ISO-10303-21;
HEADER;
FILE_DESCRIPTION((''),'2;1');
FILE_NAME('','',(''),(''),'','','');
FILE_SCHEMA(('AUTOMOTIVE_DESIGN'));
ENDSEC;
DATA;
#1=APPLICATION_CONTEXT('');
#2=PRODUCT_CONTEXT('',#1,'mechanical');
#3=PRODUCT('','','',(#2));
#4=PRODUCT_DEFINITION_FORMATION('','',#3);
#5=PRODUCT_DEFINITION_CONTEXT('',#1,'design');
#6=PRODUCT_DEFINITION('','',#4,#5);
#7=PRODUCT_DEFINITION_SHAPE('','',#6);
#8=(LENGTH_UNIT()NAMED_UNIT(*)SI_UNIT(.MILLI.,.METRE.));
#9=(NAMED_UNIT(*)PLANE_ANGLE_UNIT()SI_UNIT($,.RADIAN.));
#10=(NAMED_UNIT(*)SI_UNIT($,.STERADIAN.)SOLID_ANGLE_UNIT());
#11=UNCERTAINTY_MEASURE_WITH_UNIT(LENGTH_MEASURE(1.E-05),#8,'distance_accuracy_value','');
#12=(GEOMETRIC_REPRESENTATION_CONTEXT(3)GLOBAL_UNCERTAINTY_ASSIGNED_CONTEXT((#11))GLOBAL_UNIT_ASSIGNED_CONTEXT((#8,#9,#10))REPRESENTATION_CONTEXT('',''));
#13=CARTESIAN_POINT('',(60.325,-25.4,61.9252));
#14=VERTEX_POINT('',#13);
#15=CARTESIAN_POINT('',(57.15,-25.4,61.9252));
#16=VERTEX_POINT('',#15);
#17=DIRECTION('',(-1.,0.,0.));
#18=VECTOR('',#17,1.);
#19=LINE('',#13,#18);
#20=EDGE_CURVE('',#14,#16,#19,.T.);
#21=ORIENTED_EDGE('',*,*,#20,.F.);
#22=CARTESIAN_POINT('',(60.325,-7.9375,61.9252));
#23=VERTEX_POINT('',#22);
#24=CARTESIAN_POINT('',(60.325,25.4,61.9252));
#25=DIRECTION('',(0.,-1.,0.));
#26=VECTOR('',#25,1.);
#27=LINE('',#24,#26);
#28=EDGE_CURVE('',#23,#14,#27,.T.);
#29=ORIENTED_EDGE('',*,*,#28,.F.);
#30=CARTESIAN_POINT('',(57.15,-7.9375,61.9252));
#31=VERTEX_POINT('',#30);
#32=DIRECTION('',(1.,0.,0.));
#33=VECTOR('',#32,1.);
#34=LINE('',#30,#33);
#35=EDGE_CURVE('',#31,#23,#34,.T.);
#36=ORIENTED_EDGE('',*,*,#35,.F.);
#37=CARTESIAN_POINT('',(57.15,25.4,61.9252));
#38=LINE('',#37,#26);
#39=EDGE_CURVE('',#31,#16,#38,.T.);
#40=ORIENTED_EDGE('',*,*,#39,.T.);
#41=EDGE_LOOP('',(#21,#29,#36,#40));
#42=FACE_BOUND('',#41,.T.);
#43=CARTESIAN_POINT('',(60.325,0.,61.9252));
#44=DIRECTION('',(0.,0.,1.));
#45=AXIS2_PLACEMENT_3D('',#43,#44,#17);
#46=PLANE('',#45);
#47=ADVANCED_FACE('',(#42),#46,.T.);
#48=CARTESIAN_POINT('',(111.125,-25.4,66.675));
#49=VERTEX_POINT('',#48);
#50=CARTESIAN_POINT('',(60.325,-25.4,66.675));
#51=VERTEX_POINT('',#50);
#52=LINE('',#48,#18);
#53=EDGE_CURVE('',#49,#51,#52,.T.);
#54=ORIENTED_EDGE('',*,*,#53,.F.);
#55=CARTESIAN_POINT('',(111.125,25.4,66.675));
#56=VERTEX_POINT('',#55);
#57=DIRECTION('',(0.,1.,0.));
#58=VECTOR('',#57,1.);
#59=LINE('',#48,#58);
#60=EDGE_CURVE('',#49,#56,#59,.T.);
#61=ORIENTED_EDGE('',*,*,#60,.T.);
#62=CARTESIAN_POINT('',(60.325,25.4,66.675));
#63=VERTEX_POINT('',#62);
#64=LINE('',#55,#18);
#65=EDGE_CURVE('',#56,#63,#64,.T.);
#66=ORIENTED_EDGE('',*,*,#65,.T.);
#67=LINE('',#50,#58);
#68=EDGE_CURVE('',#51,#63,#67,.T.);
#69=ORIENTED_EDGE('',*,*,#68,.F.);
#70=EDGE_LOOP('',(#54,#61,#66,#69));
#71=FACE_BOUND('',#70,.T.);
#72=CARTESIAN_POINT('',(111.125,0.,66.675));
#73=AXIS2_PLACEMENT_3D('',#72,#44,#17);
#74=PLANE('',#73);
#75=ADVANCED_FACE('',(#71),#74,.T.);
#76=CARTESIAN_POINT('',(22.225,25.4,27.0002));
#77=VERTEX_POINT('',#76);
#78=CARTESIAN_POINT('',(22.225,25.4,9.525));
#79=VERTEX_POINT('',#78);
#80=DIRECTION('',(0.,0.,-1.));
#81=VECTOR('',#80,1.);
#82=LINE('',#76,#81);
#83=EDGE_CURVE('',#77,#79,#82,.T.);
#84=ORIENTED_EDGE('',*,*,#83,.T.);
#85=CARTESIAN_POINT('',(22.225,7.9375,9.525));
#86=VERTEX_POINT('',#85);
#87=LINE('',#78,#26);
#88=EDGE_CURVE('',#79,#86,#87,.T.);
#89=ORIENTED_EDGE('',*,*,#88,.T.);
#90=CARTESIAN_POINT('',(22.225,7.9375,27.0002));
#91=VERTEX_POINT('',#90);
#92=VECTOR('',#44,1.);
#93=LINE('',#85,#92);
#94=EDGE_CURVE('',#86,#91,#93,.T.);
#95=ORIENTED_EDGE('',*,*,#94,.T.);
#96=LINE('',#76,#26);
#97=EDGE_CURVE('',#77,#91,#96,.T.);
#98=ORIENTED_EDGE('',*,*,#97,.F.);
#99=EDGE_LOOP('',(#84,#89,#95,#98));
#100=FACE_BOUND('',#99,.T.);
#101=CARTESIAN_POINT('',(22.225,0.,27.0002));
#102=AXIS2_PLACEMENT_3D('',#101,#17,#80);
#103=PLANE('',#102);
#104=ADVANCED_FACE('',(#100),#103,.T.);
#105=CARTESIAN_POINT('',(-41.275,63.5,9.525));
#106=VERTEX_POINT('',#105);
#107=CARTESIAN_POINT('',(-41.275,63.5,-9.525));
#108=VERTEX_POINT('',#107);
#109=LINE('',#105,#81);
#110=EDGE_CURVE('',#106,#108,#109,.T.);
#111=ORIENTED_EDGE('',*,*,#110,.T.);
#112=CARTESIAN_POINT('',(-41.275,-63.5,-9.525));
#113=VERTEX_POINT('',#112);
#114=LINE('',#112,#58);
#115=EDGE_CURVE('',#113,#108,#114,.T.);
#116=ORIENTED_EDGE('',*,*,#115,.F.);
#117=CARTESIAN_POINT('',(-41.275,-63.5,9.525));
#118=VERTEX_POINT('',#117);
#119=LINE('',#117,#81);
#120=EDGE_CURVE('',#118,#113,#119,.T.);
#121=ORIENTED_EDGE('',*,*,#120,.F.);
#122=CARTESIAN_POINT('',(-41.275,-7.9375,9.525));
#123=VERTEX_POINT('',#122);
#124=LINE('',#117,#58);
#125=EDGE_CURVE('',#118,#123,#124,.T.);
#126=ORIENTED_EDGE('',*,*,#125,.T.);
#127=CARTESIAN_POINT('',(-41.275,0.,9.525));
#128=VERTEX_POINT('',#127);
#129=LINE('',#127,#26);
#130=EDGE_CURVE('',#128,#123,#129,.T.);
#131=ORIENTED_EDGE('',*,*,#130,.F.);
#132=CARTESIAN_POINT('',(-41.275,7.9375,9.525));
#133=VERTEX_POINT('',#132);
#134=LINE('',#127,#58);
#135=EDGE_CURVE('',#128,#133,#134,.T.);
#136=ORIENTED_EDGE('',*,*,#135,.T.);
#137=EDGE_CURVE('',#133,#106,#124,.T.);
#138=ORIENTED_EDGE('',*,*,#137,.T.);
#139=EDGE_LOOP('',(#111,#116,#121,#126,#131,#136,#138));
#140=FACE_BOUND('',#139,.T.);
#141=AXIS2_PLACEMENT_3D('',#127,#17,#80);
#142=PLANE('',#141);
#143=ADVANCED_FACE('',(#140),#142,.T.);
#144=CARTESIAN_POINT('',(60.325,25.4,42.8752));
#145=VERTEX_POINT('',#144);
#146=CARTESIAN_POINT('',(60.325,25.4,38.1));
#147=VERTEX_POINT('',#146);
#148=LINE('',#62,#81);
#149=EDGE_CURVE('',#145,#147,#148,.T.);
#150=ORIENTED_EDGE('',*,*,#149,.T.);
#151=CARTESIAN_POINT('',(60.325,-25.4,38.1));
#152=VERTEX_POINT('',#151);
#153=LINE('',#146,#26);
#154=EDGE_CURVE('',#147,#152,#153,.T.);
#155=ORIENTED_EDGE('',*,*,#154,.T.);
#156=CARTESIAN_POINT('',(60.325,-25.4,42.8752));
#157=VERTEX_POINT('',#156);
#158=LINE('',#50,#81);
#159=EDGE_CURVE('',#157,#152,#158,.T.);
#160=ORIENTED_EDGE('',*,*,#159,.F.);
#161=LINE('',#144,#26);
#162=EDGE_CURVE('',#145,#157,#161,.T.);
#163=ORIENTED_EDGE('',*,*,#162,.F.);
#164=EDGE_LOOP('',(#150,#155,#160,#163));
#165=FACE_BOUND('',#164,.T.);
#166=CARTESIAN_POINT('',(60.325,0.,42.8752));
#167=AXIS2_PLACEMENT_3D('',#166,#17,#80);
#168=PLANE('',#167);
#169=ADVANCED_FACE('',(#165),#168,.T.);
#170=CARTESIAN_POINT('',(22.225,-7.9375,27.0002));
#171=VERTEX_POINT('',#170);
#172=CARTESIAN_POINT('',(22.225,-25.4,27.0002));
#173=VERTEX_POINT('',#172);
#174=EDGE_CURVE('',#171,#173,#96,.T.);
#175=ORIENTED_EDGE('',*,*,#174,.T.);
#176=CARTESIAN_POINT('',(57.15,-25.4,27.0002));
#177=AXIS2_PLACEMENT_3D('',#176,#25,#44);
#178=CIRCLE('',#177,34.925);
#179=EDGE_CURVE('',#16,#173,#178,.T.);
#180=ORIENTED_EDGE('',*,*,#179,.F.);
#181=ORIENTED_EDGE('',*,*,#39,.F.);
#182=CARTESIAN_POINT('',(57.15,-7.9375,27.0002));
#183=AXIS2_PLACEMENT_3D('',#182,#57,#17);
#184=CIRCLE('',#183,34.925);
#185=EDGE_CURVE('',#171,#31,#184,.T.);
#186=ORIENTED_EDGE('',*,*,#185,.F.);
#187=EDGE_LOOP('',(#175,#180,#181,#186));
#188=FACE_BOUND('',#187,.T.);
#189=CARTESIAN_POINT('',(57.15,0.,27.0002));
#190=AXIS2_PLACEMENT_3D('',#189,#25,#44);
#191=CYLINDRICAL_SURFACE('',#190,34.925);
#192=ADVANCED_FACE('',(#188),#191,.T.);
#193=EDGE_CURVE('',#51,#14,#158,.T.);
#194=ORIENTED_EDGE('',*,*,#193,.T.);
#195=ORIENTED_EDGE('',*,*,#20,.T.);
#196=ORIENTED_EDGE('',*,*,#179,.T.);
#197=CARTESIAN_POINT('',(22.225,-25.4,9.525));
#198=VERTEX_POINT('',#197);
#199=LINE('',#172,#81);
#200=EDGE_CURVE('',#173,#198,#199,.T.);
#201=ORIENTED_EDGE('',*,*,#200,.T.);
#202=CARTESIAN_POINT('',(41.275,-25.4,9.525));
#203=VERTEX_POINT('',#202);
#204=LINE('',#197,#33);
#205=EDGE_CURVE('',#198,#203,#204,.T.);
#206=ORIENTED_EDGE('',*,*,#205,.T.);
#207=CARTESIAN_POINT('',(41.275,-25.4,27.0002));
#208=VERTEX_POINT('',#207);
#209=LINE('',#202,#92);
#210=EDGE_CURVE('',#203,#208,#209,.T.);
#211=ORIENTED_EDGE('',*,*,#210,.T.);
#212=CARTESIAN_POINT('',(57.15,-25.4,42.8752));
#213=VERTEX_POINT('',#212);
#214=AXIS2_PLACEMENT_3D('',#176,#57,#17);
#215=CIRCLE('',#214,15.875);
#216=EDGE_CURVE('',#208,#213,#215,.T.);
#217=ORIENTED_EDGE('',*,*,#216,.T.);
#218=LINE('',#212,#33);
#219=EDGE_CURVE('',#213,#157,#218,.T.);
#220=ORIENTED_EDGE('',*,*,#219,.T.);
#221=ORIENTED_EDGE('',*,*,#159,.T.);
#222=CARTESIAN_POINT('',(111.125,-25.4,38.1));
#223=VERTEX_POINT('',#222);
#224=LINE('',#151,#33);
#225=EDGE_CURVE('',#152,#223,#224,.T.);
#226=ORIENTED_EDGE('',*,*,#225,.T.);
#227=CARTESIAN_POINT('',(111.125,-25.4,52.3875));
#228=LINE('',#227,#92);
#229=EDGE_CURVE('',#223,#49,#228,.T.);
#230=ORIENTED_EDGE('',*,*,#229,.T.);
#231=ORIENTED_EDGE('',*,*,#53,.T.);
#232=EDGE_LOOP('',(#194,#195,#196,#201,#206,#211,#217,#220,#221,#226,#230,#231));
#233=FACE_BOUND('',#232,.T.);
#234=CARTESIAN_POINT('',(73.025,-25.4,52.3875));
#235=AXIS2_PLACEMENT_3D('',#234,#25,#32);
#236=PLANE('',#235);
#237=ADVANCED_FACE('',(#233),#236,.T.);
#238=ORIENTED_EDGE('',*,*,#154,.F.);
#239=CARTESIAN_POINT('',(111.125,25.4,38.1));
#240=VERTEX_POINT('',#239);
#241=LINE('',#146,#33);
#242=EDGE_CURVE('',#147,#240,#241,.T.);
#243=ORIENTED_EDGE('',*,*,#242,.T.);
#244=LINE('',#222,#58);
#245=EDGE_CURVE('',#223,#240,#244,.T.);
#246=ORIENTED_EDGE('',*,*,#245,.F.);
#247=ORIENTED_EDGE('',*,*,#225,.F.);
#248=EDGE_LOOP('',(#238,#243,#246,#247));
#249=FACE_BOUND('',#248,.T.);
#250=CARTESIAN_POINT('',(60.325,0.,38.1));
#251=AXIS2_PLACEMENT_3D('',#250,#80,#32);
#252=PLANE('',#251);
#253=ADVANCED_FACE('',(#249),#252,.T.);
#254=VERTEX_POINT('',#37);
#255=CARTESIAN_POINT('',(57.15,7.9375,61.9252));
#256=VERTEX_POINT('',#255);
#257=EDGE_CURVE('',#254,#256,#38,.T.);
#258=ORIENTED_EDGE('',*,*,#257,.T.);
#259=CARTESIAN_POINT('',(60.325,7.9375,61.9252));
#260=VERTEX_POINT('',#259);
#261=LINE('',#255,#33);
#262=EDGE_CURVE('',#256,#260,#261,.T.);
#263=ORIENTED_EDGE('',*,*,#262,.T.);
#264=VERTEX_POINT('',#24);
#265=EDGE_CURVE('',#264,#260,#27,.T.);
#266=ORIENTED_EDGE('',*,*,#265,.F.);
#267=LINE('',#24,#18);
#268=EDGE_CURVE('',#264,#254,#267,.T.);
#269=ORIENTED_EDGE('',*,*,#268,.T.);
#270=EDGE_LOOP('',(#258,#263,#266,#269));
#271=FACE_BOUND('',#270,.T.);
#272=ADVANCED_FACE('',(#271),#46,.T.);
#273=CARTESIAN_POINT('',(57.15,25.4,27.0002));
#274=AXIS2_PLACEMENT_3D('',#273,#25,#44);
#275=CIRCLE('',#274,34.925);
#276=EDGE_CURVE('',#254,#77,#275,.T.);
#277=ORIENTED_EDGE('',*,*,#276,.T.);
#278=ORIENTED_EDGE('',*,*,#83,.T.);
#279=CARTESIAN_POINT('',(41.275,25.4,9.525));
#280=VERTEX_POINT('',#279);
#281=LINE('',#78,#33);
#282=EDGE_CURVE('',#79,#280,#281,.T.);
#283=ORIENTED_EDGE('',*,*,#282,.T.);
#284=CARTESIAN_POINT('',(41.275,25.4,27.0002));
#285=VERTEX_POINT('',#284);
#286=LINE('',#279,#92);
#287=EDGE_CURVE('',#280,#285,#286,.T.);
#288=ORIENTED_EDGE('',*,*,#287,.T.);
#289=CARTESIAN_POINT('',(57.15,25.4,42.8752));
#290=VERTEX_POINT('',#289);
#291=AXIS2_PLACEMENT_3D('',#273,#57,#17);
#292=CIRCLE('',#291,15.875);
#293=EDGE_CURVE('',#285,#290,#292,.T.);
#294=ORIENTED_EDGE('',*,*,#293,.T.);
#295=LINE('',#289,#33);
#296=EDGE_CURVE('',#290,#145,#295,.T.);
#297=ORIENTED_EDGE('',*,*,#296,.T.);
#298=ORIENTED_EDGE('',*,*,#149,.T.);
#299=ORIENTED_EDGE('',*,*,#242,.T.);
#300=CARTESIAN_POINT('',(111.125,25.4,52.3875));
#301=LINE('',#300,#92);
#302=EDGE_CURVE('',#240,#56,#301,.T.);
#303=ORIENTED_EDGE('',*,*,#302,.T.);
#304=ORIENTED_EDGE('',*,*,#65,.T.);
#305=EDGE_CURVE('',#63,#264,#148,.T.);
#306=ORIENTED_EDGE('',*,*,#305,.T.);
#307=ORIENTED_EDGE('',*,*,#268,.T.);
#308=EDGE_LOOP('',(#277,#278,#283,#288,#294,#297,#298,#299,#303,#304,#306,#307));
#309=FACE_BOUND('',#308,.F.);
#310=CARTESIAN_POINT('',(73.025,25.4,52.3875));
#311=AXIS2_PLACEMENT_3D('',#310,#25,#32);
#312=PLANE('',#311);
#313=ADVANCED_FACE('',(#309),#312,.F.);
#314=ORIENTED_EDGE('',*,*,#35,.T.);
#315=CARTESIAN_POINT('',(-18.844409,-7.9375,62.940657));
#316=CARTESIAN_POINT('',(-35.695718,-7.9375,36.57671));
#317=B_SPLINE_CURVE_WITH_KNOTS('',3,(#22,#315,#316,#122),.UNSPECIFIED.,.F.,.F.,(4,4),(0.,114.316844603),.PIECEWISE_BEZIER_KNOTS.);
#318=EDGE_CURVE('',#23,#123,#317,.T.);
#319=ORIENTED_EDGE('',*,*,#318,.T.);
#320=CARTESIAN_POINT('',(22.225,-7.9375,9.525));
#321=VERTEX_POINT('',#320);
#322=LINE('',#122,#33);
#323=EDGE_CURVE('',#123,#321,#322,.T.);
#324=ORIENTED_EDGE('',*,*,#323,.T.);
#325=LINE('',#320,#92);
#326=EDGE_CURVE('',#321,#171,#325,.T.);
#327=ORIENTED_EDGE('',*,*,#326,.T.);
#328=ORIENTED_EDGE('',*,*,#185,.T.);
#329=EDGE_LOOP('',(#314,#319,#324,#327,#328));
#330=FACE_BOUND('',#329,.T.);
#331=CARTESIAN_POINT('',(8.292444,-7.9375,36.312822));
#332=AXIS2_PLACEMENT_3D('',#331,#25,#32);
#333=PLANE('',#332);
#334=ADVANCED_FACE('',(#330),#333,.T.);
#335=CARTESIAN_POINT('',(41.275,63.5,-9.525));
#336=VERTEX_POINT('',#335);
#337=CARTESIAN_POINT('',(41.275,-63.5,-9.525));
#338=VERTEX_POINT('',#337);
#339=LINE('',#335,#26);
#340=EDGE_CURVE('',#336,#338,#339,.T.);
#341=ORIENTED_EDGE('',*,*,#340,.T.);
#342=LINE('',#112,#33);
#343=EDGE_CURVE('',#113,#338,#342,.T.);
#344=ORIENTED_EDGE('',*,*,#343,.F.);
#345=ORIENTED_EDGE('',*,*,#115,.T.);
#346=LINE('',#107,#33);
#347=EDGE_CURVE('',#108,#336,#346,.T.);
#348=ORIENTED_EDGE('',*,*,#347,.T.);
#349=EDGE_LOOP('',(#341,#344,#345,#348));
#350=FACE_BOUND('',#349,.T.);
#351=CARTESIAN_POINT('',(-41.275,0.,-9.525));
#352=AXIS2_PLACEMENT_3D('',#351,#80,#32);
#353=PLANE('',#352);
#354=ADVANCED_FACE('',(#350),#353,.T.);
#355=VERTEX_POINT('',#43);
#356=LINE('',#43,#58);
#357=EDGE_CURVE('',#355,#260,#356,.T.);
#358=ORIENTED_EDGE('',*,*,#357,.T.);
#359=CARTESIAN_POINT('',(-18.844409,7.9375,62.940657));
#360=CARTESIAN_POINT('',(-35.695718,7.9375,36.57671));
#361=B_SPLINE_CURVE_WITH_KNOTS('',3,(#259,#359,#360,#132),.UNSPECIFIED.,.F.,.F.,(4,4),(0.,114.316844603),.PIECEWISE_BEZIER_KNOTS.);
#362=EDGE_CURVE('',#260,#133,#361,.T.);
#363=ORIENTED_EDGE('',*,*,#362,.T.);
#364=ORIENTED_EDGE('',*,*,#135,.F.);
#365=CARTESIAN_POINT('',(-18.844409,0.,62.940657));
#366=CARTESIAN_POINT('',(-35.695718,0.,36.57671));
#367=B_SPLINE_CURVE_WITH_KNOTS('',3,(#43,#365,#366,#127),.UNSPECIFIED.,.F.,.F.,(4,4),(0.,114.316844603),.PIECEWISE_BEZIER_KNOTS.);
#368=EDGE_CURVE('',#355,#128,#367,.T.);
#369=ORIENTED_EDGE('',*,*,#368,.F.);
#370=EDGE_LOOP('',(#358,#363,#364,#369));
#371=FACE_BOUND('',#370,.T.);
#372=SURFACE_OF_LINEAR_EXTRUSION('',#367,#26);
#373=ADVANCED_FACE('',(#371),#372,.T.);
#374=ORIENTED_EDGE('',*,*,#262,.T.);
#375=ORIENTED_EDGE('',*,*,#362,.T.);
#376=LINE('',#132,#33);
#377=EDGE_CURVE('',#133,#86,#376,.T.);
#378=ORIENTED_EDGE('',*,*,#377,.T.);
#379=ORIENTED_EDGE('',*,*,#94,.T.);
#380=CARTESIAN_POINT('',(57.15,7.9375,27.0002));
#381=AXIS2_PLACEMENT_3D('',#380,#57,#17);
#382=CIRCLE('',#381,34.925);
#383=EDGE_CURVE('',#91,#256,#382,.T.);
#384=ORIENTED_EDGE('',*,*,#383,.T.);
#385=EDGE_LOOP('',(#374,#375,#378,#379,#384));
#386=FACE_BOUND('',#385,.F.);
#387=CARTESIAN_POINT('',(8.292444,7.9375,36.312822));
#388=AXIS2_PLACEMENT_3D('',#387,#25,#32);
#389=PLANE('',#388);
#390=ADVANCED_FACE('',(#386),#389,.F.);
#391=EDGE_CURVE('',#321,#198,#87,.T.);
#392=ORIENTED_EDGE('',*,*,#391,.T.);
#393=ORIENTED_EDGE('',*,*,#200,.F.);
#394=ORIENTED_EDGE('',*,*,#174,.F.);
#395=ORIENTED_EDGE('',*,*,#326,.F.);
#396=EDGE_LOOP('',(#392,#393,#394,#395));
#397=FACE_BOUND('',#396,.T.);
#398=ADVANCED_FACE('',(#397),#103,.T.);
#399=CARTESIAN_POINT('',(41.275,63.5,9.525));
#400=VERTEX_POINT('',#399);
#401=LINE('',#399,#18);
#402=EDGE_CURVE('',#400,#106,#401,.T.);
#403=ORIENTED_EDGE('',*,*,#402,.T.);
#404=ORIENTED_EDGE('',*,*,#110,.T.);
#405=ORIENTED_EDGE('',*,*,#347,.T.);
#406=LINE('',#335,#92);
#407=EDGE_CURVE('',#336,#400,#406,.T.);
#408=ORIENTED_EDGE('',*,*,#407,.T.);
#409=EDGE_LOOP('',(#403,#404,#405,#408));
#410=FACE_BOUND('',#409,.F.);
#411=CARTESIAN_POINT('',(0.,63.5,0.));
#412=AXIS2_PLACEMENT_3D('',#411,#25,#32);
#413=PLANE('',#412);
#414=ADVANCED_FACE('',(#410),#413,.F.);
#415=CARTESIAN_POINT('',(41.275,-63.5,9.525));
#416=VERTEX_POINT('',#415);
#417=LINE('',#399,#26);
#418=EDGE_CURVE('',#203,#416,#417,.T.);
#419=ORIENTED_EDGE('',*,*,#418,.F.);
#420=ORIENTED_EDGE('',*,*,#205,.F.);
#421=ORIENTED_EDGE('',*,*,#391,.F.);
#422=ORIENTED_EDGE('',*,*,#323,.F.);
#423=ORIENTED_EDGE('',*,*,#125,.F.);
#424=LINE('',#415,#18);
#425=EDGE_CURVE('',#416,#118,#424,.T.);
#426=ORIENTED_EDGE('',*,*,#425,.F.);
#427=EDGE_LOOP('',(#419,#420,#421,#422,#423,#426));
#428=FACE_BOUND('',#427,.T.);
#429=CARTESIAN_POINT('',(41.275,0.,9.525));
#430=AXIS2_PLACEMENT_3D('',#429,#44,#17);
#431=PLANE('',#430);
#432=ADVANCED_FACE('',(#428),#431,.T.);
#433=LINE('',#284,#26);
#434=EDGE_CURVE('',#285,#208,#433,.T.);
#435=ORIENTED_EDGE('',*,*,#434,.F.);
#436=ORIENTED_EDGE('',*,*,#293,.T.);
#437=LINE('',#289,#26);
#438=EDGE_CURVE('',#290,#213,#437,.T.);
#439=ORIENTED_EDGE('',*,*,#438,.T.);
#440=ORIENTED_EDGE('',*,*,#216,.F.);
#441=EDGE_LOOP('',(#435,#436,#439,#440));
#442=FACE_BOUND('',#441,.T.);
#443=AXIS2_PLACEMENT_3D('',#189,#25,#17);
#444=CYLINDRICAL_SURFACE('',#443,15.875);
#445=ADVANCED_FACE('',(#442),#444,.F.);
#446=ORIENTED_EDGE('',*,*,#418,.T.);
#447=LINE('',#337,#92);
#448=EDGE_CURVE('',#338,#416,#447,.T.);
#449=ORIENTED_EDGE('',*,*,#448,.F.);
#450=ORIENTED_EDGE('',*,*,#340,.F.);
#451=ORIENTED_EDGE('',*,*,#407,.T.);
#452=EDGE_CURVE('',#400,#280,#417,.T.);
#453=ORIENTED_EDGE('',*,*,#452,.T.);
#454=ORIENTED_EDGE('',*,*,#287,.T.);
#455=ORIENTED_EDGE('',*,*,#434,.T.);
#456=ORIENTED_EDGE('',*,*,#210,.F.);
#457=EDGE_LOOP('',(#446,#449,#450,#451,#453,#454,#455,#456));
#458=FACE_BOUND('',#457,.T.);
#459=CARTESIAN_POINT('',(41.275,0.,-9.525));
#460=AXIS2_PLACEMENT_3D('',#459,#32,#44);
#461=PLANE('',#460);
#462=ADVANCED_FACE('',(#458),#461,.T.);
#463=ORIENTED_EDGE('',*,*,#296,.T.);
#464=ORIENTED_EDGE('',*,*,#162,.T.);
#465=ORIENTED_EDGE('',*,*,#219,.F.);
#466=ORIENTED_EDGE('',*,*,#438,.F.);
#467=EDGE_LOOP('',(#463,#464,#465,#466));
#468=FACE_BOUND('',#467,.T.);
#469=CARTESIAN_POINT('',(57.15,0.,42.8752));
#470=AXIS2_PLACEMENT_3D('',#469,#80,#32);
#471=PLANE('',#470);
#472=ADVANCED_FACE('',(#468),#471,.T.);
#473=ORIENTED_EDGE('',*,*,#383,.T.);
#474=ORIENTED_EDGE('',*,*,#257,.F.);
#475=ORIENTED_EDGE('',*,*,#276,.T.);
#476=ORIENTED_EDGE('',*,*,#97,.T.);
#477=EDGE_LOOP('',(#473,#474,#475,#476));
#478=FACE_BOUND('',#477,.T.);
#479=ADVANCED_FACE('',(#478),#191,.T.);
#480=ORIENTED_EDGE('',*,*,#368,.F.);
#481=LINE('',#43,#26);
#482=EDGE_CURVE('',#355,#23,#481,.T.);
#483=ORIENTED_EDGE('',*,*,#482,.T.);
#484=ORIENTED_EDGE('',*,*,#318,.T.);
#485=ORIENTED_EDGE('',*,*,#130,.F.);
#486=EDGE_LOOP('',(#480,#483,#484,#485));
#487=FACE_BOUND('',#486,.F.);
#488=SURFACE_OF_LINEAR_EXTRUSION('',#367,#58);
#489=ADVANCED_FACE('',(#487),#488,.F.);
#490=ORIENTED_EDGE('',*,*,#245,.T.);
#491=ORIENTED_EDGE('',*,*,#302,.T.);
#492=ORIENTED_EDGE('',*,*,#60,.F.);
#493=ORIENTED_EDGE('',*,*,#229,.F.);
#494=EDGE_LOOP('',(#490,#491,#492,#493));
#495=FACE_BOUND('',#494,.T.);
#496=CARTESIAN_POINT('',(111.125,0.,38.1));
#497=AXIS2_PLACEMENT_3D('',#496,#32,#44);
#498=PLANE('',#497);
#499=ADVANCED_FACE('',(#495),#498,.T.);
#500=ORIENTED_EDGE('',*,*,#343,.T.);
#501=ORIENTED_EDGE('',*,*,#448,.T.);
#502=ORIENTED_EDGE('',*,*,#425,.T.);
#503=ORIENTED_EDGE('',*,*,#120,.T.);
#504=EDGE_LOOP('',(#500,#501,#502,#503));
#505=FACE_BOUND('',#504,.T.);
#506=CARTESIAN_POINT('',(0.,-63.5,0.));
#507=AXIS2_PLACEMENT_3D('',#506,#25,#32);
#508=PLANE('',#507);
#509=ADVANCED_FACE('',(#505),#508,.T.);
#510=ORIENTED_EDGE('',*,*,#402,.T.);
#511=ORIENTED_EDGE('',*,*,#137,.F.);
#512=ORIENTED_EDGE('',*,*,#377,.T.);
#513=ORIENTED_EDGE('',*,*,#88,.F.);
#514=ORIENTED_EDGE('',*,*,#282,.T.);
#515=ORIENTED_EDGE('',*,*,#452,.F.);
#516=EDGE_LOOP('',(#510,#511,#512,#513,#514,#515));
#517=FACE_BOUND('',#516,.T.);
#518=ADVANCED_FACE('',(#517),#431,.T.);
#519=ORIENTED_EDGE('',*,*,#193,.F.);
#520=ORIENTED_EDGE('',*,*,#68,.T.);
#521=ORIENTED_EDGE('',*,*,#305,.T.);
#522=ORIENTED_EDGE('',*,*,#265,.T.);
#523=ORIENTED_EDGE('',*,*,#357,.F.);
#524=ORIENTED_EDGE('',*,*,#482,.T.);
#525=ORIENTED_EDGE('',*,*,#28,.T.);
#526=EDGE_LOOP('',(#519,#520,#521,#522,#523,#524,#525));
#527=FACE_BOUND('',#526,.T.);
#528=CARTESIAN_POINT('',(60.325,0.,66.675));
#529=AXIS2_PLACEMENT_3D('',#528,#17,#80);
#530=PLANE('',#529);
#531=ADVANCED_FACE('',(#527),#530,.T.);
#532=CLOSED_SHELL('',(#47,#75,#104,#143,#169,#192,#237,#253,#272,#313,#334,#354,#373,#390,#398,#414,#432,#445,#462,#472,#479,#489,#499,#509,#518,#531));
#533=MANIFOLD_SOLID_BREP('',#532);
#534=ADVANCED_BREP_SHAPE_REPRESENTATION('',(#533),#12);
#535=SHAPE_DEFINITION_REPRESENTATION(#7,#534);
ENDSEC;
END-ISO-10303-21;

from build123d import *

# Parameters (mm, degrees)
F1_DEPTH = 63.5
F0_W     = 25.4
F0_H     = 28.575
F2_DEPTH = 25.4
F3_DEPTH = 7.9375


# Not quite as in the source:
# - a feature of the source that left no trace in its solid (it failed there, or was rolled back) is left out


with BuildPart() as f1:
    # F0 (on Front) → F1 (new body, symmetric)
    with BuildSketch(Plane.XZ):
        Polygon((-41.275, -9.525), (41.275, -9.525), (41.275, 9.525), (22.225, 9.525), (-41.275, 9.525), align=None)
    extrude(amount=F1_DEPTH, both=True)

    # F0 (on Front) → F2 (join, symmetric)
    with BuildSketch(Plane.XZ):
        Polygon((60.325, 66.675), (60.325, 61.9252), (60.325, 42.8752), (60.325, 38.1), (85.725, 38.1), (85.725, 66.675), align=None)
        with BuildLine():
            Line((22.225, 9.525), (41.275, 9.525))
            Line((41.275, 9.525), (41.275, 27.0002))
            ThreePointArc((41.275, 27.0002), (45.9246798487, 38.2255201513), (57.15, 42.8752))
            Line((57.15, 42.8752), (60.325, 42.8752))
            Line((60.325, 42.8752), (60.325, 61.9252))
            Line((60.325, 61.9252), (57.15, 61.9252))
            ThreePointArc((57.15, 61.9252), (32.4542956671, 51.6959043329), (22.225, 27.0002))
            Line((22.225, 27.0002), (22.225, 9.525))
        make_face()
        with Locations((98.425, 52.3875)):
            Rectangle(F0_W, F0_H)
    extrude(amount=F2_DEPTH, both=True)

    # F0 (on Front) → F3 (join, symmetric)
    with BuildSketch(Plane.XZ):
        with BuildLine():
            add(Edge.make_bspline(
                [(60.325, 61.9252), (-18.8444089144, 62.9406571388), (-35.6957179924, 36.5767096935), (-41.275, 9.525)],
                knots=[0, 0, 0, 0, 114.3168446032, 114.3168446032, 114.3168446032, 114.3168446032], degree=3))
            Line((-41.275, 9.525), (22.225, 9.525))
            Line((22.225, 9.525), (22.225, 27.0002))
            ThreePointArc((22.225, 27.0002), (32.4542956671, 51.6959043329), (57.15, 61.9252))
            Line((57.15, 61.9252), (60.325, 61.9252))
        make_face()
    extrude(amount=F3_DEPTH, both=True)


solid = f1.part
